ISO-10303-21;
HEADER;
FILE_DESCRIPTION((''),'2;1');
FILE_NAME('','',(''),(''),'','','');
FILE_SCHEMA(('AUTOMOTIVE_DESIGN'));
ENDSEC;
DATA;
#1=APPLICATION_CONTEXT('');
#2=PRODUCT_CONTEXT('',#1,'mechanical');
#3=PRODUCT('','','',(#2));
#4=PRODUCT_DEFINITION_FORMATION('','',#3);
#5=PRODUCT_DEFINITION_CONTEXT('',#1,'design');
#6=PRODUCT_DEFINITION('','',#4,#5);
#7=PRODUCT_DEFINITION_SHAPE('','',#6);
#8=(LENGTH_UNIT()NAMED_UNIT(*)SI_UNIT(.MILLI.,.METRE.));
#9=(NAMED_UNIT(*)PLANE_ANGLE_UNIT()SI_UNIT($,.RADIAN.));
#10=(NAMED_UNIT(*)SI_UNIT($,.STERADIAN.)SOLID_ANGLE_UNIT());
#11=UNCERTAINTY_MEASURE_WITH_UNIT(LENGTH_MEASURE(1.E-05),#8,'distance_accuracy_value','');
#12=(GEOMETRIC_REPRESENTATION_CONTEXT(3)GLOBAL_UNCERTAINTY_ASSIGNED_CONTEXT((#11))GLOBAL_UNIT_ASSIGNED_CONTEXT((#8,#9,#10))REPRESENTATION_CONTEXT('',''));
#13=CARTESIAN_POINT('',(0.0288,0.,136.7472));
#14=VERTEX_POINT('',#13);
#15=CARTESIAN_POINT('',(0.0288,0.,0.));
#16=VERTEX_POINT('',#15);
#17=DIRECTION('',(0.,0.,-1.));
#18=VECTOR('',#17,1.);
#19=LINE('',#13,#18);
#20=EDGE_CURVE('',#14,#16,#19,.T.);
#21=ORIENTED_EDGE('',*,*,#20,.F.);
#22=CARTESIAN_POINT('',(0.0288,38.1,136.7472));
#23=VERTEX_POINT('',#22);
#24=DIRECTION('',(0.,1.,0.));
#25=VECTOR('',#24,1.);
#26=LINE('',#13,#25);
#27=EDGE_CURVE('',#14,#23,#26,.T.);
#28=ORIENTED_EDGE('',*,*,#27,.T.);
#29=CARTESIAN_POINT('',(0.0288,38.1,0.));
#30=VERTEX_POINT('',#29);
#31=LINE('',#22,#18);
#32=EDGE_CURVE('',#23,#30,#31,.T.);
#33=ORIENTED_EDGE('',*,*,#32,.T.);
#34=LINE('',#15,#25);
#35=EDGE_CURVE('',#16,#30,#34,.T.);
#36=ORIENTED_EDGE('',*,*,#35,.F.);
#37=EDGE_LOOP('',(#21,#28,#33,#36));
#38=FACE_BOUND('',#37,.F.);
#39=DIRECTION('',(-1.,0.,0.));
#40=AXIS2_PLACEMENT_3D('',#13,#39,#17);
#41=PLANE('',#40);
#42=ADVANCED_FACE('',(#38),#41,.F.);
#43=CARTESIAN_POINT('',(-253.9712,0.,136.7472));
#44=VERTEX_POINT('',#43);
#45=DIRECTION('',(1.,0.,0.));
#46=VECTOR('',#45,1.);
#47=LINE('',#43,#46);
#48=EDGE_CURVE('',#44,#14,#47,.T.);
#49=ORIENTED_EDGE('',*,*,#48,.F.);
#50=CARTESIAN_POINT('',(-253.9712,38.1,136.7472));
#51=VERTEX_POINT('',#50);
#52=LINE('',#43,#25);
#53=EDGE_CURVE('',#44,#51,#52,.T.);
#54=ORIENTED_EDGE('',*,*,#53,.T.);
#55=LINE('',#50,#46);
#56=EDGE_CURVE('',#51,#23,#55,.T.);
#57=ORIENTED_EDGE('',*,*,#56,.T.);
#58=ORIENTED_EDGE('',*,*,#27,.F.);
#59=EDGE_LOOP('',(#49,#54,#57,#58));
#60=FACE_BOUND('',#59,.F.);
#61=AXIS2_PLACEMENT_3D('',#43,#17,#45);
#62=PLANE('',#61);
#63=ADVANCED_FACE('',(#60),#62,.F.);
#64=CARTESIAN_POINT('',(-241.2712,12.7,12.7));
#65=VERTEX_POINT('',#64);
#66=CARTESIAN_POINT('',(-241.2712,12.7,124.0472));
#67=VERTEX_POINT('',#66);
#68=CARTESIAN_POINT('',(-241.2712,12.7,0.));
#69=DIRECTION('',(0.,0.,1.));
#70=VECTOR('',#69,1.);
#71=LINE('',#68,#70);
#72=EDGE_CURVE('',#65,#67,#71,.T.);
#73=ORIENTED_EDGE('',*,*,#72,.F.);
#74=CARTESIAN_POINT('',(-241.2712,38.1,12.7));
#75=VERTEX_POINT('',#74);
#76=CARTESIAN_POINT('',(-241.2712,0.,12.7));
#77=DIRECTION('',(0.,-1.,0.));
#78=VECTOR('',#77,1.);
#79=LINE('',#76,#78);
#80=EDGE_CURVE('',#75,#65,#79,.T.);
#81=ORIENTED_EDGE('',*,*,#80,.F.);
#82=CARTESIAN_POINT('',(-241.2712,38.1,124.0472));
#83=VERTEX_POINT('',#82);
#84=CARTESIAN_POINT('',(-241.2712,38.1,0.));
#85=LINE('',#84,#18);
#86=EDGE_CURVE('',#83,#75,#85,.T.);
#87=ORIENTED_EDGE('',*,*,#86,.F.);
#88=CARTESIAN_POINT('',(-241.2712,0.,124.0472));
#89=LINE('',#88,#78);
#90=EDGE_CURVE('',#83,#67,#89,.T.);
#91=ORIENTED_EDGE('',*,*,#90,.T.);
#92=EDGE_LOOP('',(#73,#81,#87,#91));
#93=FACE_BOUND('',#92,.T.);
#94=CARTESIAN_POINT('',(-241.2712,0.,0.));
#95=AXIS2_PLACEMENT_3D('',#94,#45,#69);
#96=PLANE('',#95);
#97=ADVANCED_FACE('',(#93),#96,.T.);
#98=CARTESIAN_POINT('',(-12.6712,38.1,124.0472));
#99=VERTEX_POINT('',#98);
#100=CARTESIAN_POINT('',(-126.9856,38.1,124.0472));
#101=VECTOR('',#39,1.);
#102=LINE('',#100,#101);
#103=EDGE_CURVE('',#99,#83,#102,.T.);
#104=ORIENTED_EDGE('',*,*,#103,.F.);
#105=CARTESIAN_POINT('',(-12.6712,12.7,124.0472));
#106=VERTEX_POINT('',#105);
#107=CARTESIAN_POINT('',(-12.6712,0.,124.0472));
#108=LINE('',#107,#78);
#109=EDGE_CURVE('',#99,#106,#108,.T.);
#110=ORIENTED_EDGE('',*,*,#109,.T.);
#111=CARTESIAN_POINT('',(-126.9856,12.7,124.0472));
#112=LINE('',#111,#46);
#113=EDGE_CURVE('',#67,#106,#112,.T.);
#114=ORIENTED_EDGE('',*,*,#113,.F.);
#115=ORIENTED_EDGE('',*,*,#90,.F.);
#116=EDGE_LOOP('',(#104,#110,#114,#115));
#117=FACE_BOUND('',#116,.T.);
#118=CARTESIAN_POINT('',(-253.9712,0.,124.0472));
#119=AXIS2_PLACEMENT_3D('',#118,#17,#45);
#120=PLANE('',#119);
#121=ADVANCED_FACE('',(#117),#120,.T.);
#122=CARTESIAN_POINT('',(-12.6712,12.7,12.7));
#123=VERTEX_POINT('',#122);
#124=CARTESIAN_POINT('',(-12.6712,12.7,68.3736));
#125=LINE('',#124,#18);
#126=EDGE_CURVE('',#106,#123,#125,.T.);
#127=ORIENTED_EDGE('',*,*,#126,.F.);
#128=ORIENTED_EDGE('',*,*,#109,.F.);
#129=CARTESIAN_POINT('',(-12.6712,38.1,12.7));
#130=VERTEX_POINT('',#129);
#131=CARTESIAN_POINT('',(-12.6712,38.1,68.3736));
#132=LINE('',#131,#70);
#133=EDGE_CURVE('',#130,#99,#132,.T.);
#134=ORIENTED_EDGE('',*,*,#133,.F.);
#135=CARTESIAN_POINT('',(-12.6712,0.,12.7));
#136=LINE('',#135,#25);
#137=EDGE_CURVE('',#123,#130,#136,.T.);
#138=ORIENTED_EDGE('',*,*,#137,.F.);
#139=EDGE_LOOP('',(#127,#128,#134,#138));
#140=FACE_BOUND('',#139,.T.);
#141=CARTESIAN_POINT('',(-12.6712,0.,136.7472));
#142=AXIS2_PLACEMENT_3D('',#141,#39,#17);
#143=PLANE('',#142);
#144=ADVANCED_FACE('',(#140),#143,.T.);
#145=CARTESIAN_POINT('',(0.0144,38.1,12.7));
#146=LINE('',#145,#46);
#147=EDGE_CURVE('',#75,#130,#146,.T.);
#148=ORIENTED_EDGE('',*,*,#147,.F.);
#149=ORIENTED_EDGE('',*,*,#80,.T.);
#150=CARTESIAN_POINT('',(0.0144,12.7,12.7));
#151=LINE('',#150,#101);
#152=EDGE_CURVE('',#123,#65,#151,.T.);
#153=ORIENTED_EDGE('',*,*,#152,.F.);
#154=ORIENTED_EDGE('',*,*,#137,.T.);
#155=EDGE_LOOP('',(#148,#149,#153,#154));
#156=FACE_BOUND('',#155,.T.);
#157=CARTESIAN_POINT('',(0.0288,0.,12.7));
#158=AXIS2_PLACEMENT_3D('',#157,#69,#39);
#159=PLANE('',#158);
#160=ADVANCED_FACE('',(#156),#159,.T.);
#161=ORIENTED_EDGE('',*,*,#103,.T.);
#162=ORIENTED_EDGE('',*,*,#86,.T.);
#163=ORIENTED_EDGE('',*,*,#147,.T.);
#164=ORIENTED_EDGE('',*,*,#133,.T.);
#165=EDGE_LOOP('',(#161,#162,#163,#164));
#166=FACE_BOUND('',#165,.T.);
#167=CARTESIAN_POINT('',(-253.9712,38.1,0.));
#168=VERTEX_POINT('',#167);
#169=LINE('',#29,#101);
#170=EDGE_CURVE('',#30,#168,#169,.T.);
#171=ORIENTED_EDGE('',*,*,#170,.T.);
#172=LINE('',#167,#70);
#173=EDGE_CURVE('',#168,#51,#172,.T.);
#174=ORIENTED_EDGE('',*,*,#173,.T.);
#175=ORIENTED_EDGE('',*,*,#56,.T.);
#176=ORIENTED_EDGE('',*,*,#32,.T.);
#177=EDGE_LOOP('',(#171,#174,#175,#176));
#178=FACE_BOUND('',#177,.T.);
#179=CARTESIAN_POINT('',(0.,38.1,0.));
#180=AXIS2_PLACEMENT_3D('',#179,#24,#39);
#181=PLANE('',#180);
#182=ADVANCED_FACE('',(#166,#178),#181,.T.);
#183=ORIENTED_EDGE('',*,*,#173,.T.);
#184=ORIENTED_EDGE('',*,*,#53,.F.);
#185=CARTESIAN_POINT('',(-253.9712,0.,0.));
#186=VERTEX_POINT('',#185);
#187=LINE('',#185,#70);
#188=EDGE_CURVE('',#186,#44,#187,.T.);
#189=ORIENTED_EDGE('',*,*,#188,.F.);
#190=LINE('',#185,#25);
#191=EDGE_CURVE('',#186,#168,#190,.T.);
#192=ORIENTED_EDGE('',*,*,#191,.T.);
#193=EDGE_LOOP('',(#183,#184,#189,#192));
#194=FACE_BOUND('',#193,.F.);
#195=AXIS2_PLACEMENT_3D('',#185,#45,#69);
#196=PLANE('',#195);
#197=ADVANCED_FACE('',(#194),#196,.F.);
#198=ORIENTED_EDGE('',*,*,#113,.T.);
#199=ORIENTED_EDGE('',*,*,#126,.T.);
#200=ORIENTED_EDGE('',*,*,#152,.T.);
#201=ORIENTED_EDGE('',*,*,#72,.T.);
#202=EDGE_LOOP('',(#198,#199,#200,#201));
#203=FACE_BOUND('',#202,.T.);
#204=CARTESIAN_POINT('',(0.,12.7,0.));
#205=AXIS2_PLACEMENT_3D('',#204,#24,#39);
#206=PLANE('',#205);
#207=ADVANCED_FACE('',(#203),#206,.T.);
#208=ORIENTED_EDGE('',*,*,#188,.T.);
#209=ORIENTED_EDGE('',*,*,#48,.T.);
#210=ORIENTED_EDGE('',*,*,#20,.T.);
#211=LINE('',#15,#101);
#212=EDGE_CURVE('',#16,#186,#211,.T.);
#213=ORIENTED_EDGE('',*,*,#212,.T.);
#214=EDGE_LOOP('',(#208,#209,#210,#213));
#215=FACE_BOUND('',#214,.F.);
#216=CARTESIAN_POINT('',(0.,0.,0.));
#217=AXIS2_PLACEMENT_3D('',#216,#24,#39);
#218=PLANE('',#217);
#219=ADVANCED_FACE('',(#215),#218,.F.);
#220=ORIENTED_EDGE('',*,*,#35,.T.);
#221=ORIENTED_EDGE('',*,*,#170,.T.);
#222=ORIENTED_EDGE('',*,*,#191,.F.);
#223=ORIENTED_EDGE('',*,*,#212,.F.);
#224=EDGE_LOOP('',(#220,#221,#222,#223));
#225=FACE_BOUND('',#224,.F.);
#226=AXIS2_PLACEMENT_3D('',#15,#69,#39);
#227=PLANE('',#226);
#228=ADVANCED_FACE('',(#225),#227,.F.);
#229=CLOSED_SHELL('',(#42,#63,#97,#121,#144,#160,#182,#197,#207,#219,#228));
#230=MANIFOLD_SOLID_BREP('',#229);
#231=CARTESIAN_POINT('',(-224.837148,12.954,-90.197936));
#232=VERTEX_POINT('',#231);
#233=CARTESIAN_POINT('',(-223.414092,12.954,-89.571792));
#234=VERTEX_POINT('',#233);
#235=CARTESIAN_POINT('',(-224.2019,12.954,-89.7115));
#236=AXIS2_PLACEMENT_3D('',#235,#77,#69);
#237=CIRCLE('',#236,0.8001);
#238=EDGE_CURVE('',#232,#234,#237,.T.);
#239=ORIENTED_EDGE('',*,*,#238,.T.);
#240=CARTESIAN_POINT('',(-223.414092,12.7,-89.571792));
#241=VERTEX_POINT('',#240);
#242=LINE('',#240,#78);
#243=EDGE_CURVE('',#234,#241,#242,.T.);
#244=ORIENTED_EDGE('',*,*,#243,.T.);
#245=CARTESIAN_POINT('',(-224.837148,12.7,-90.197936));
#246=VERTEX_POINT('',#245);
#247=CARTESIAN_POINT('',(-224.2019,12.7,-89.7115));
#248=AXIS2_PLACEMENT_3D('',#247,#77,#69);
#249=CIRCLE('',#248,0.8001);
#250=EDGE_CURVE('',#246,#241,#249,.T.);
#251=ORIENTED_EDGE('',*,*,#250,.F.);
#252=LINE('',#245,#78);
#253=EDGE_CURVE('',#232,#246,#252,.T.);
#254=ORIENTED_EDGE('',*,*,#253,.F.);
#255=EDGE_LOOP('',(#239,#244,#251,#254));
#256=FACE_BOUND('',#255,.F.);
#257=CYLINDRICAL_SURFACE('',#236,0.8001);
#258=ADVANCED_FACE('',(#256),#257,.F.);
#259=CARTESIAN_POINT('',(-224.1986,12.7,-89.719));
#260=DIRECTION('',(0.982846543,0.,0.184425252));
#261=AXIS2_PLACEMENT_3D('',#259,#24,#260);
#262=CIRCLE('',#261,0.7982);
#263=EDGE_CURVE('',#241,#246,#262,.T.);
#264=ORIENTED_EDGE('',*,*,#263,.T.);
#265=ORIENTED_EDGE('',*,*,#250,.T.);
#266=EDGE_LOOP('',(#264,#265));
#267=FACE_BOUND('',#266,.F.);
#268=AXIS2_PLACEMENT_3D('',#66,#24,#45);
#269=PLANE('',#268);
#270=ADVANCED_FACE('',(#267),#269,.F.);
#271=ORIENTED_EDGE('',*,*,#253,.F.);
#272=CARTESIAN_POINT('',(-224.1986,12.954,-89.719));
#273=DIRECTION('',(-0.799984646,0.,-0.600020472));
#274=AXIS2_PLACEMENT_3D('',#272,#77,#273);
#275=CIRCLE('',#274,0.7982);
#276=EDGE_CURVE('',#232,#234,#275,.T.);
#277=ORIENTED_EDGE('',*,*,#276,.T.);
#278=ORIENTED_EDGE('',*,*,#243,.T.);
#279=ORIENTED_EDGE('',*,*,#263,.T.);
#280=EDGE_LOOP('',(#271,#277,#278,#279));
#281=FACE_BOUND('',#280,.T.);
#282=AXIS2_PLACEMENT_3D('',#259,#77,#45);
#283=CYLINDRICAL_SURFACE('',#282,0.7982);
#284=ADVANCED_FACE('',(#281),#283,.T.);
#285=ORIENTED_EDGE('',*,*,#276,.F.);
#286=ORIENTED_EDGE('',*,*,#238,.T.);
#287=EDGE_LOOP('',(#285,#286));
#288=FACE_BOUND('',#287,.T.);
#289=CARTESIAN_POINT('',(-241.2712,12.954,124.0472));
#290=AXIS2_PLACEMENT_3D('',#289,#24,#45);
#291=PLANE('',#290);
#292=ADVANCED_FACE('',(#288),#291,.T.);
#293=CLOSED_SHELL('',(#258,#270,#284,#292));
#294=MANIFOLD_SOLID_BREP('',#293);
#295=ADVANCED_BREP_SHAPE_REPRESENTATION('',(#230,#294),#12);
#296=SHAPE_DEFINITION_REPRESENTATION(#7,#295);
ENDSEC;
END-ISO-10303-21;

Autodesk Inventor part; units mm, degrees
ref_plane "YZ Plane" through (0, 0, 0) normal (1, 0, 0) x (0, 1, 0)
ref_plane "XZ Plane" through (0, 0, 0) normal (0, 1, 0) x (-1, 0, 0)
ref_plane "XY Plane" through (0, 0, 0) normal (0, 0, 1) x (1, 0, 0)
sketch "Sketch1" plane through (0, 0, 0) normal (0, 1, 0) x (-1, 0, 0)
  line L0 (-0.0288, 0) -> (253.9712, 0)
  line L1 (253.9712, 0) -> (253.9712, 136.7472)
  line L2 (253.9712, 136.7472) -> (-0.0288, 136.7472)
  line L3 (-0.0288, 136.7472) -> (-0.0288, 0)
  line L4 (253.9712, 136.7472) -> (-0.0288, 136.7472)
  line L5 (-0.0288, 136.7472) -> (-0.0288, 0)
  line L6 (-0.0288, 0) -> (253.9712, 0)
  line L7 (253.9712, 0) -> (253.9712, 136.7472)
  line L8 (-0.0288, 136.7472) -> (253.9712, 136.7472)
  line L9 (253.9712, 136.7472) -> (253.9712, 0)
  line L10 (253.9712, 0) -> (-0.0288, 0)
  line L11 (-0.0288, 0) -> (-0.0288, 136.7472)
  dimension "d0" = 254
  dimension "d1" = 136.7536
extrude "Extrusion1" add sketch "Sketch1" along normal blind 38.1
shell "Shell1" thickness 12.7 removed faces 1 at (-169.3045, 38.1, 45.5824)
sketch "Sketch2" plane through (-241.2712, 12.7, 124.0472) normal (0, 1, 0) x (1, 0, 0)
  circle A0 centre (17.0726, 213.7662) radius 0.7982
  point P0 (241.2712, 124.0472)
extrude "Extrusion2" add sketch "Sketch2" along normal blind 0.254
sketch "Sketch3" plane through (-224.1986, 12.954, -89.719) normal (0, 1, 0) x (1, 0, 0)
  point P0 (224.1986, -89.719)
  point P1 (-0.0033, -0.0074)
hole "Hole1" at (-224.2019, 12.954, -89.7115) direction (0, -1, 0) diameter 1.6002 end through all
shell "Shell2" [suppressed]
sketch "Sketch4" plane through (0, 0, 0) normal (0, -1, 0) x (1, 0, 0)
  point P0 (0, 0)
properties part number "box final"
